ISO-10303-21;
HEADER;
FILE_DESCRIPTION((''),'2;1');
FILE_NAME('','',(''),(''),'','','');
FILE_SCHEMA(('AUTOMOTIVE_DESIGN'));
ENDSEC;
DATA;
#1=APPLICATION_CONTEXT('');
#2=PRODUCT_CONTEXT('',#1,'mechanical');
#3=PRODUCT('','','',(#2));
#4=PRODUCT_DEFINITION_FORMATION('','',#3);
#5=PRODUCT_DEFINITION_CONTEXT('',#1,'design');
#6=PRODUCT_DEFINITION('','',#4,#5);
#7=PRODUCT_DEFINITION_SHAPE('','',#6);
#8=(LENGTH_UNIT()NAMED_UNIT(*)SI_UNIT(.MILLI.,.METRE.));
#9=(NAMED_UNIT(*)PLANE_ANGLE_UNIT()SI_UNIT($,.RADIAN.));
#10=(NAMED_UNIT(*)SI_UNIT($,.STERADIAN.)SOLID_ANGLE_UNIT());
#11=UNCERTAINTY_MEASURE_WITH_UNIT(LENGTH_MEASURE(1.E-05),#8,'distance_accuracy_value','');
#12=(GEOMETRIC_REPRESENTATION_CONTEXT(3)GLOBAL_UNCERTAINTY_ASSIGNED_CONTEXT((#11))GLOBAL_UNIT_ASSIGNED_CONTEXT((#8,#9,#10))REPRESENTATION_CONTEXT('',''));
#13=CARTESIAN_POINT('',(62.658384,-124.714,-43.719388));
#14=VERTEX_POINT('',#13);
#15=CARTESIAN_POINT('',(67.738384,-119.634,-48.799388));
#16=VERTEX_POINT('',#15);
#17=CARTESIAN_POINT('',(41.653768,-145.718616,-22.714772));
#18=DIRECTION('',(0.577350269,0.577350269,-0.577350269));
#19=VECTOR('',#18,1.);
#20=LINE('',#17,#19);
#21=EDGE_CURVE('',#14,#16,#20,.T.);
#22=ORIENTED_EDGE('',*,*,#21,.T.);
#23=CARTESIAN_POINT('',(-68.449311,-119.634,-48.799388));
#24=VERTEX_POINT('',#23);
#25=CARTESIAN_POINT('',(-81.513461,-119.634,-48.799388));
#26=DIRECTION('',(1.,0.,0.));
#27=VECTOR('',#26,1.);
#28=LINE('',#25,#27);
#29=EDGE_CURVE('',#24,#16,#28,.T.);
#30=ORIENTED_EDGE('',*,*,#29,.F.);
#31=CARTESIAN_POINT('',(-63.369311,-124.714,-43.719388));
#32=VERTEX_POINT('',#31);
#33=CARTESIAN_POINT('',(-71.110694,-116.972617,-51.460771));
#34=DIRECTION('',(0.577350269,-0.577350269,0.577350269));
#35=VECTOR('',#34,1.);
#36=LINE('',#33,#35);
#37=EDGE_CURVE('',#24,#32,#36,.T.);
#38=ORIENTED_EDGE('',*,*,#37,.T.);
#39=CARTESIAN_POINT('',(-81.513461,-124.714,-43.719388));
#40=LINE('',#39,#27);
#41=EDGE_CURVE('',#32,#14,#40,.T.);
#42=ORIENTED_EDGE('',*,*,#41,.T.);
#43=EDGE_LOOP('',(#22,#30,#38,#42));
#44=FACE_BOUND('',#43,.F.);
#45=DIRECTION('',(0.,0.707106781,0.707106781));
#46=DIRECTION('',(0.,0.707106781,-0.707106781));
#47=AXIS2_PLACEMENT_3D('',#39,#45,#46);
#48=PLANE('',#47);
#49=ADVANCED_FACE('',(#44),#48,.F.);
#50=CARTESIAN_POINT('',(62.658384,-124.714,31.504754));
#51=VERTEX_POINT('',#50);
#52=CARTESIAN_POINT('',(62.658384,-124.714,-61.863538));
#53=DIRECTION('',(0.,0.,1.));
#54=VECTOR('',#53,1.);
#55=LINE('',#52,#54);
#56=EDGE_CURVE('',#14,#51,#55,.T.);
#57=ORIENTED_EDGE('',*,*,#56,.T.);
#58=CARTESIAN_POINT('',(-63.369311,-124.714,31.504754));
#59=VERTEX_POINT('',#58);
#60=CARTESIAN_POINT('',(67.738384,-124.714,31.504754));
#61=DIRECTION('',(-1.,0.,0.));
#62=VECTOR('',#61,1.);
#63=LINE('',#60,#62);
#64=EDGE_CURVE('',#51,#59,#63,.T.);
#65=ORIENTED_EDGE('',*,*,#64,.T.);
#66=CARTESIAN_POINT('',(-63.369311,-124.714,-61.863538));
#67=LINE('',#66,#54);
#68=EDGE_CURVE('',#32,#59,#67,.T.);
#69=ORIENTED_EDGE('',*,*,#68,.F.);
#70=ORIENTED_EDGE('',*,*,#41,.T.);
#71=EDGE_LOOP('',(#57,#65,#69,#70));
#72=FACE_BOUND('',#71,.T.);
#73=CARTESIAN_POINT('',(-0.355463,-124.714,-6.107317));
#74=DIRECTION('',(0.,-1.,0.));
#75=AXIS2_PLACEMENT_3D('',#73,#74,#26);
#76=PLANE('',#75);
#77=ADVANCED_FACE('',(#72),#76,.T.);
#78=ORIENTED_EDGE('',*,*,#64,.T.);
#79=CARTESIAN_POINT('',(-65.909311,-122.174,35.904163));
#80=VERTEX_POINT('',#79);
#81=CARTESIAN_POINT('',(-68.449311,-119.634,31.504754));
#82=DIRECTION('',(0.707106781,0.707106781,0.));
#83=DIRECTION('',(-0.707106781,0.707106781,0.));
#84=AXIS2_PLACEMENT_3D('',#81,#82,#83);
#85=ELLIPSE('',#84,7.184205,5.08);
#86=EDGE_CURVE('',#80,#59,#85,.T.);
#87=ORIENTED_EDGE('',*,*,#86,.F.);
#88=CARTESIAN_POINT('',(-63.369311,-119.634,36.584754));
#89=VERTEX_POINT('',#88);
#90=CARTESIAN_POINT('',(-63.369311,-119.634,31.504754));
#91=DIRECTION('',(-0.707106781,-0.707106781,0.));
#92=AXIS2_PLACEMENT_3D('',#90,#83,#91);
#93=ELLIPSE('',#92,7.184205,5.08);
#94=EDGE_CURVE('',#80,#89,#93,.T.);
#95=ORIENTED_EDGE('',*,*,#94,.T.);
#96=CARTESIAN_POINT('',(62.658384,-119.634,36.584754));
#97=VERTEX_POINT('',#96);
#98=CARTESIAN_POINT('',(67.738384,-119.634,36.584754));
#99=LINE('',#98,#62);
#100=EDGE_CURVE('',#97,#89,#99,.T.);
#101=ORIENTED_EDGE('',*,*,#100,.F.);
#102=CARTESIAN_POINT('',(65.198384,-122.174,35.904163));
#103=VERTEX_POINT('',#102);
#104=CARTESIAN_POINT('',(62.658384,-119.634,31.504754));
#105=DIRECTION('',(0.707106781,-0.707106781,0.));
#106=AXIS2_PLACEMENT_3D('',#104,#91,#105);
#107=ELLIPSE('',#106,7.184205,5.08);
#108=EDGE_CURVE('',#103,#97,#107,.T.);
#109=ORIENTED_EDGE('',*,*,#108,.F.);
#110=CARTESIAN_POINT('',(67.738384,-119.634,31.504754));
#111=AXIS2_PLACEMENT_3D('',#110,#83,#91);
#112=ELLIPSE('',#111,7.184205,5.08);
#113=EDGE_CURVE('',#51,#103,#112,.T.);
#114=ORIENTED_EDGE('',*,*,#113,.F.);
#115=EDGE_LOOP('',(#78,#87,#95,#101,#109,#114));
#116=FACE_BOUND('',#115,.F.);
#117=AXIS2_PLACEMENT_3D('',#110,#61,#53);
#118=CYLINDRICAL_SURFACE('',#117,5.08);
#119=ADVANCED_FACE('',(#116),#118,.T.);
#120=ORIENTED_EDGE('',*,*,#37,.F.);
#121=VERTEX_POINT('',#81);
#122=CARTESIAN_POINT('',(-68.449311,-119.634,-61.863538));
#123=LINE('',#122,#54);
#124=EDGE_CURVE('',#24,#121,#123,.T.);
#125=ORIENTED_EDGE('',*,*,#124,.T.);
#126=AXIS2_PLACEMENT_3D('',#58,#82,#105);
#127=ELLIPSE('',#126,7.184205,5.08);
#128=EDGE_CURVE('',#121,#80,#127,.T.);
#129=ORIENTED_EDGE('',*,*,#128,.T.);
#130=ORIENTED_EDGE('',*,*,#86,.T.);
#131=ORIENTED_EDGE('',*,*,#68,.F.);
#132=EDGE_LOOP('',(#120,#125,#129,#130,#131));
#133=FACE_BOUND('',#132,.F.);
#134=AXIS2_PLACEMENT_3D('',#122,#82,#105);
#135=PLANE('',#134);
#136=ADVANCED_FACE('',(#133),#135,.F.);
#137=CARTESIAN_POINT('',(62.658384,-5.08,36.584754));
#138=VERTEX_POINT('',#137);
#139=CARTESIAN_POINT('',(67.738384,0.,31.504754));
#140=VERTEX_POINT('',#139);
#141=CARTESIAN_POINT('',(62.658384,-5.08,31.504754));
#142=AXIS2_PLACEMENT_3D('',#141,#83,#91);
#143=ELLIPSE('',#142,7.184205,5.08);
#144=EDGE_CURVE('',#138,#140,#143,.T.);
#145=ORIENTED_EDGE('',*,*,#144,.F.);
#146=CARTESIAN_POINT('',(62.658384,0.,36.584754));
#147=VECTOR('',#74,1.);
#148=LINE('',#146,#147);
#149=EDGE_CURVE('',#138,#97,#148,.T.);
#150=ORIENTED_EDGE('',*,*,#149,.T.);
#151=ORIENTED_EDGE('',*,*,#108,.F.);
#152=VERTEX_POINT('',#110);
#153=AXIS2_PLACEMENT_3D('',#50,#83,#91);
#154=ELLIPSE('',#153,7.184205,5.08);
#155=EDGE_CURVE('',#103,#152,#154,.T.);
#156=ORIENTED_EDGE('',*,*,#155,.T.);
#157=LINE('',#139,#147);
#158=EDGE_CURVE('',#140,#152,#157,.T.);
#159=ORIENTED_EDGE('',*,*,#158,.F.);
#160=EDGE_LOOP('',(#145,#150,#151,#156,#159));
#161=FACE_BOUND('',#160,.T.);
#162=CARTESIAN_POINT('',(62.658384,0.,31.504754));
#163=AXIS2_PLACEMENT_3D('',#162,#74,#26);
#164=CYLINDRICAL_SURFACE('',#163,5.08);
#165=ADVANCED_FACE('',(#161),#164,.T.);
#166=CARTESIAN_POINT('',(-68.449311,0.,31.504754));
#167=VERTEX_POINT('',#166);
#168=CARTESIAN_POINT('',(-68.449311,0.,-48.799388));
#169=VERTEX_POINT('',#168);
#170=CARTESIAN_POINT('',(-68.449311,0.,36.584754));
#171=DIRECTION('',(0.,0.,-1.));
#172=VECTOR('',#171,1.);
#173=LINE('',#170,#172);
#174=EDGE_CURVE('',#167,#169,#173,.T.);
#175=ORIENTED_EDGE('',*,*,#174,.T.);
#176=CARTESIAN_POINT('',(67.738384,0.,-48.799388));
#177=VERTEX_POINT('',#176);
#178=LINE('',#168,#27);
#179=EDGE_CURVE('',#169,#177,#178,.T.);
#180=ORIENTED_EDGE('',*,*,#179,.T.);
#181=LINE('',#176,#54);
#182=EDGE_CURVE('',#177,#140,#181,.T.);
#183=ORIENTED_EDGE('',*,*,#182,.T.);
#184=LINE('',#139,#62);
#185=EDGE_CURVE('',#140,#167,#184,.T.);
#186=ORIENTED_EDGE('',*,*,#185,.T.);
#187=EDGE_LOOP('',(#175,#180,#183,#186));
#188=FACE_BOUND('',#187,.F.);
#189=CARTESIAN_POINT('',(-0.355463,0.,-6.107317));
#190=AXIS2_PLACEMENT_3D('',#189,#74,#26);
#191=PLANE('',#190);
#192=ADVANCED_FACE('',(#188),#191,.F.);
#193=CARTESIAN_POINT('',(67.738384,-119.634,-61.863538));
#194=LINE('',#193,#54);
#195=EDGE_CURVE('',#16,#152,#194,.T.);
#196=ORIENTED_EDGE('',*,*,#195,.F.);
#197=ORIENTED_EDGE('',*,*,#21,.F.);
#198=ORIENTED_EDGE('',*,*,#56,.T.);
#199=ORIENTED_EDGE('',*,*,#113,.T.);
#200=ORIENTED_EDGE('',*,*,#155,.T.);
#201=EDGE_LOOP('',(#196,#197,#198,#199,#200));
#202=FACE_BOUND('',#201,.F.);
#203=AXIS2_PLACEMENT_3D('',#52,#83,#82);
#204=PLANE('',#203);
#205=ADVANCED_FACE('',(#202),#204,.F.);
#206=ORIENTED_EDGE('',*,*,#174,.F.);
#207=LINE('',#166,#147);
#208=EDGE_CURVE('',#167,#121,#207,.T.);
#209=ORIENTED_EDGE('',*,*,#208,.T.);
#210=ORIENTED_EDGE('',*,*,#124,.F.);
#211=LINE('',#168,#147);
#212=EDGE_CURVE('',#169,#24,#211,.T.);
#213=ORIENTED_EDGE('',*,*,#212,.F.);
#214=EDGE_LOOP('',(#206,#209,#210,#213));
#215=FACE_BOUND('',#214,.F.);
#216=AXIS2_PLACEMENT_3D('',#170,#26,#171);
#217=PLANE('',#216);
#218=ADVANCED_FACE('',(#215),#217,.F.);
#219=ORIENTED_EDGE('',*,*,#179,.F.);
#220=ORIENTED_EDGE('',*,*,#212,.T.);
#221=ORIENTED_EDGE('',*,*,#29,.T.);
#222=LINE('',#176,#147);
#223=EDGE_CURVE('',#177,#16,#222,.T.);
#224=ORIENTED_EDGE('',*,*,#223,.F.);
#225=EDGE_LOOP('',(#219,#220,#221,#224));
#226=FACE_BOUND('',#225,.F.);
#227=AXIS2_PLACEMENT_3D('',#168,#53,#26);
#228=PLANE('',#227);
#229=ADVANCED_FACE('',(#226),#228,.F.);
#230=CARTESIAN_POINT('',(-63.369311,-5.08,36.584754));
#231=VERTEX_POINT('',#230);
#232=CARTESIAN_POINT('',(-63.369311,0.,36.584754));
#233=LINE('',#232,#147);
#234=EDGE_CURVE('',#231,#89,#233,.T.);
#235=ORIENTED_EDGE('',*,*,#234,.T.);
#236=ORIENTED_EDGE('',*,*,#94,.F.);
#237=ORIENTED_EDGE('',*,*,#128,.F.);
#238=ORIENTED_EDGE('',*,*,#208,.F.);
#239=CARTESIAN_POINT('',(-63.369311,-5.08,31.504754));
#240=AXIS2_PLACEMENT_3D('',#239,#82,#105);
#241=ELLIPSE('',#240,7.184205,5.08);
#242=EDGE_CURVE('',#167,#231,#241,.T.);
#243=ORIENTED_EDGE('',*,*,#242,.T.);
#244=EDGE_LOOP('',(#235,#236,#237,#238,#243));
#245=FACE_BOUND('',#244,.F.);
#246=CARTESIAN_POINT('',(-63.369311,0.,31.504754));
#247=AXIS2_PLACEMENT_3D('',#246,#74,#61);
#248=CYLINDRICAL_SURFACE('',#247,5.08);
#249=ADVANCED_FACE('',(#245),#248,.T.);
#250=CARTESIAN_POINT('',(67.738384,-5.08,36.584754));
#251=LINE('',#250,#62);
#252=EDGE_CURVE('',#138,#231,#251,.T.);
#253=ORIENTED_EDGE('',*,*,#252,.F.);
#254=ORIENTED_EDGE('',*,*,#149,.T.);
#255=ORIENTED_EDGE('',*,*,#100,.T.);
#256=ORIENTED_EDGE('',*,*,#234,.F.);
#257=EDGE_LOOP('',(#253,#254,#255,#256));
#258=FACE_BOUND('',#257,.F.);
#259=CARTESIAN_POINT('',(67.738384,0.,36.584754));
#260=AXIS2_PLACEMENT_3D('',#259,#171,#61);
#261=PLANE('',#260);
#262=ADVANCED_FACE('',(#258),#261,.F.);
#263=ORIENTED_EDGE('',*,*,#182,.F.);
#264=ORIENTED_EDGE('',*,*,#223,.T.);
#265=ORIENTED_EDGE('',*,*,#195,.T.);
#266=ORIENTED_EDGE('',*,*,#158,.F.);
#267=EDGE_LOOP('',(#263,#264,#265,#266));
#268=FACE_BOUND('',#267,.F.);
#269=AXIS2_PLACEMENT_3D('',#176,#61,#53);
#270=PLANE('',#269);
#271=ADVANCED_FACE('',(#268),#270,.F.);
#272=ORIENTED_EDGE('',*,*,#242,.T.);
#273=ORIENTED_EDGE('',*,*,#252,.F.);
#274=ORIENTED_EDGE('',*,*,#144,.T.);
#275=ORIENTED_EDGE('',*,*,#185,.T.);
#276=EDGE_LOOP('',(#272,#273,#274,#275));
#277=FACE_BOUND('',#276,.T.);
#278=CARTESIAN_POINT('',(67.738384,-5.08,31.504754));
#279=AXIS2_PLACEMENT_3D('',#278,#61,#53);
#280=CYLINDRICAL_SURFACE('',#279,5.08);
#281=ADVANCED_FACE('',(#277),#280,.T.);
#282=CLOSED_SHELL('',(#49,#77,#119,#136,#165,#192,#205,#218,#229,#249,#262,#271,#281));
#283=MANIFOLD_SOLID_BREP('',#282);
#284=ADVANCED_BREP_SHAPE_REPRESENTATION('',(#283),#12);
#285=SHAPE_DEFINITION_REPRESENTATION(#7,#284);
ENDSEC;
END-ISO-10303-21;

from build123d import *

# Parameters (mm, degrees)
F1_DEPTH    = 124.714
F2_R        = 5.08
F3_T1_DEPTH = 106.4324408115
F3_T3_DEPTH = 162.3159941245


# Not quite as in the source:
# - a fillet or chamfer that OpenCascade refuses, or shapes differently, is made with other operations: its cross-section is extruded or revolved along the edge and cut away or added


with BuildPart() as f1:
    # F0 (on Front) → F1 (new body)
    with BuildSketch(Plane.XZ):
        Polygon((-27.0380023867, 36.5847535431), (-68.4493109584, 36.5847535431), (-68.4493109584, -48.7993881106), (67.7383840084, -48.7993881106), (67.7383840084, 36.5847535431), (0, 36.5847535431), align=None)
    extrude(amount=F1_DEPTH)

    # F2
    f2_edges = [f1.edges().sort_by_distance(p)[0] for p in [
        (-68.449311, -62.357, 36.584754),
        (-0.355463, 0, 36.584754),
        (67.738384, -62.357, 36.584754),
        (-0.355463, -124.714, 36.584754),
    ]]
    fillet(f2_edges, radius=F2_R)

    # F3: chamfer of 5.08 on 4 edges, made by hand

    # F3_s2 → F3_t1 (cut)
    with BuildSketch(Plane.XY.offset(-61.8635376895)):
        Polygon((-68.4493109584, -119.634), (-63.3693109584, -124.714), (-68.4493109584, -124.714), align=None)
        Polygon((62.6583840084, -124.714), (67.7383840084, -119.634), (67.7383840084, -124.714), align=None)
    extrude(amount=F3_T1_DEPTH, mode=Mode.SUBTRACT)

    # F3_s4 → F3_t3 (cut)
    with BuildSketch(Plane.YZ.offset(-81.5134605373)):
        Polygon((-124.714, -43.7193881106), (-119.634, -48.7993881106), (-124.714, -48.7993881106), align=None)
    extrude(amount=F3_T3_DEPTH, mode=Mode.SUBTRACT)


solid = f1.part
